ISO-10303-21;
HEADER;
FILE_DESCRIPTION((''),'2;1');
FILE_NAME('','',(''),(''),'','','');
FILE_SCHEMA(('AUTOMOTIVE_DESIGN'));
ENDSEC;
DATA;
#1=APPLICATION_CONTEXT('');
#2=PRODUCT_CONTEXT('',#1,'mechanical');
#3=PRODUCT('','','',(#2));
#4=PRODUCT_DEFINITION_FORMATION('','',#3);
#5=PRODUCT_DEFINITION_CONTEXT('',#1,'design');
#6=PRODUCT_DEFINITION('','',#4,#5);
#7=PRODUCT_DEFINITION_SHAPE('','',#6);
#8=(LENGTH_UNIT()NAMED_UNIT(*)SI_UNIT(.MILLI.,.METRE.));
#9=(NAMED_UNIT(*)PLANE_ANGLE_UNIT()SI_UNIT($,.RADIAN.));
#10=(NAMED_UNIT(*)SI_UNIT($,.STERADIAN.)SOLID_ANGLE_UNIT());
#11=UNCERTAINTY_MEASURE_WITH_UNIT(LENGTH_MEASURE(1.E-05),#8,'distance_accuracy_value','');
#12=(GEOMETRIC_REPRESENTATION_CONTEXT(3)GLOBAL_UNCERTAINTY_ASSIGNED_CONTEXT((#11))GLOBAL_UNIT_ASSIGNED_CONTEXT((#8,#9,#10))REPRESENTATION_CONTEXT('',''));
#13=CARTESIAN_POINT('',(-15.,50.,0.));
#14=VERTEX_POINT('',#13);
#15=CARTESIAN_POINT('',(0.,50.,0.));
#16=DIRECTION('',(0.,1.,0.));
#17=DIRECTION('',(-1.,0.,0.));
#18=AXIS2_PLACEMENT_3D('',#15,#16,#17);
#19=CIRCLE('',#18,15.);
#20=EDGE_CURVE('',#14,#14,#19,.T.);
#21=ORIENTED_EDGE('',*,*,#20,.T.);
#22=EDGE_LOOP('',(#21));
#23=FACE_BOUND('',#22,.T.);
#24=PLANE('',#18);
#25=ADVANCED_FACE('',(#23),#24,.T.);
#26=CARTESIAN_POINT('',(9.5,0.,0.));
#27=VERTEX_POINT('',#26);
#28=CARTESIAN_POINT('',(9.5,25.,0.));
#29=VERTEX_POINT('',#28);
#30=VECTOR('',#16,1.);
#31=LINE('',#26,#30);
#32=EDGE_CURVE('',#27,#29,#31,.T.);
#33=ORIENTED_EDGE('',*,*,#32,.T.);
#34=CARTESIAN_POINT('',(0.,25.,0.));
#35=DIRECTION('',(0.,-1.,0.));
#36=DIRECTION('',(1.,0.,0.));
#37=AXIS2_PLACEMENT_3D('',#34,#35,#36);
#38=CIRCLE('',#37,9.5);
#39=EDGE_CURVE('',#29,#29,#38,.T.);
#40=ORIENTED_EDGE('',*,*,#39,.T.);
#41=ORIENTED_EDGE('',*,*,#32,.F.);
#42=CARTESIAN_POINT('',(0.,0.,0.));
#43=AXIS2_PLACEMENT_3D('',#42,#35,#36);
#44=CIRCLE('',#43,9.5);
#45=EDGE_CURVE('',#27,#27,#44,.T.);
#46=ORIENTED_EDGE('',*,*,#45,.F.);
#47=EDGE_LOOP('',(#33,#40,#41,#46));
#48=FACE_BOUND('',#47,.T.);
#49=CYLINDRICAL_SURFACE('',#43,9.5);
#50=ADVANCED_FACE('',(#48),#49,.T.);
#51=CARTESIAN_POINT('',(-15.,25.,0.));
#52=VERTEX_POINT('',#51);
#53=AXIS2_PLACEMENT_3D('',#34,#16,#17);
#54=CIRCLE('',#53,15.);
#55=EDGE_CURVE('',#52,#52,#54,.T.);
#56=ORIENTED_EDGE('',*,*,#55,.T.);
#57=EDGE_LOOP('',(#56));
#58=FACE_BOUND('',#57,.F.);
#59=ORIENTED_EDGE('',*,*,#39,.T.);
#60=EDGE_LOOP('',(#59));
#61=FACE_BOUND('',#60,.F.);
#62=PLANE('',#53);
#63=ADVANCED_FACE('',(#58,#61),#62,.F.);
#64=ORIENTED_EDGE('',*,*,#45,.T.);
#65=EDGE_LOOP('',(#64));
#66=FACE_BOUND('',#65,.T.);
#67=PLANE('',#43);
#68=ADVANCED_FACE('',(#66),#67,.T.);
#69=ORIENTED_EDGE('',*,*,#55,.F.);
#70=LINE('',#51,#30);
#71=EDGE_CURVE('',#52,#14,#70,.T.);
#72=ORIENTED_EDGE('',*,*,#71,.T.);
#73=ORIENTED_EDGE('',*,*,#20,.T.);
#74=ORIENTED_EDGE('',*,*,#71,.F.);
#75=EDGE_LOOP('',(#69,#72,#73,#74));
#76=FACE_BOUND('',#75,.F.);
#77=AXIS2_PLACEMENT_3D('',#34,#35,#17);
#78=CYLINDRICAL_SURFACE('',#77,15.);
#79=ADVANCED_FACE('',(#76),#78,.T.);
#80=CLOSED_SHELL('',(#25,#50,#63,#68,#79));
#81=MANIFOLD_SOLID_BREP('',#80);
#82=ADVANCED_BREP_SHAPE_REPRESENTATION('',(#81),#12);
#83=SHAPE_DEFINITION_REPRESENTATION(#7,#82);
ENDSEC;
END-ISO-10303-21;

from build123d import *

# Parameters (mm, degrees)
F0_R     = 9.5
F1_DEPTH = 25
F2_R     = 15
F2_R_2   = 9.5
F3_DEPTH = 25


with BuildPart() as f1:
    # F0 (on Front) → F1 (new body)
    with BuildSketch(Plane.XZ):
        Circle(F0_R)
    extrude(amount=-F1_DEPTH)

    # F2 (on face) → F3 (join)
    with BuildSketch(Plane(origin=(0, 25, 0), x_dir=(-1, 0, 0), z_dir=(0, 1, 0))):
        Circle(F2_R)
        Circle(F2_R_2, mode=Mode.SUBTRACT)
        Circle(F2_R_2)
    extrude(amount=F3_DEPTH)


solid = f1.part
